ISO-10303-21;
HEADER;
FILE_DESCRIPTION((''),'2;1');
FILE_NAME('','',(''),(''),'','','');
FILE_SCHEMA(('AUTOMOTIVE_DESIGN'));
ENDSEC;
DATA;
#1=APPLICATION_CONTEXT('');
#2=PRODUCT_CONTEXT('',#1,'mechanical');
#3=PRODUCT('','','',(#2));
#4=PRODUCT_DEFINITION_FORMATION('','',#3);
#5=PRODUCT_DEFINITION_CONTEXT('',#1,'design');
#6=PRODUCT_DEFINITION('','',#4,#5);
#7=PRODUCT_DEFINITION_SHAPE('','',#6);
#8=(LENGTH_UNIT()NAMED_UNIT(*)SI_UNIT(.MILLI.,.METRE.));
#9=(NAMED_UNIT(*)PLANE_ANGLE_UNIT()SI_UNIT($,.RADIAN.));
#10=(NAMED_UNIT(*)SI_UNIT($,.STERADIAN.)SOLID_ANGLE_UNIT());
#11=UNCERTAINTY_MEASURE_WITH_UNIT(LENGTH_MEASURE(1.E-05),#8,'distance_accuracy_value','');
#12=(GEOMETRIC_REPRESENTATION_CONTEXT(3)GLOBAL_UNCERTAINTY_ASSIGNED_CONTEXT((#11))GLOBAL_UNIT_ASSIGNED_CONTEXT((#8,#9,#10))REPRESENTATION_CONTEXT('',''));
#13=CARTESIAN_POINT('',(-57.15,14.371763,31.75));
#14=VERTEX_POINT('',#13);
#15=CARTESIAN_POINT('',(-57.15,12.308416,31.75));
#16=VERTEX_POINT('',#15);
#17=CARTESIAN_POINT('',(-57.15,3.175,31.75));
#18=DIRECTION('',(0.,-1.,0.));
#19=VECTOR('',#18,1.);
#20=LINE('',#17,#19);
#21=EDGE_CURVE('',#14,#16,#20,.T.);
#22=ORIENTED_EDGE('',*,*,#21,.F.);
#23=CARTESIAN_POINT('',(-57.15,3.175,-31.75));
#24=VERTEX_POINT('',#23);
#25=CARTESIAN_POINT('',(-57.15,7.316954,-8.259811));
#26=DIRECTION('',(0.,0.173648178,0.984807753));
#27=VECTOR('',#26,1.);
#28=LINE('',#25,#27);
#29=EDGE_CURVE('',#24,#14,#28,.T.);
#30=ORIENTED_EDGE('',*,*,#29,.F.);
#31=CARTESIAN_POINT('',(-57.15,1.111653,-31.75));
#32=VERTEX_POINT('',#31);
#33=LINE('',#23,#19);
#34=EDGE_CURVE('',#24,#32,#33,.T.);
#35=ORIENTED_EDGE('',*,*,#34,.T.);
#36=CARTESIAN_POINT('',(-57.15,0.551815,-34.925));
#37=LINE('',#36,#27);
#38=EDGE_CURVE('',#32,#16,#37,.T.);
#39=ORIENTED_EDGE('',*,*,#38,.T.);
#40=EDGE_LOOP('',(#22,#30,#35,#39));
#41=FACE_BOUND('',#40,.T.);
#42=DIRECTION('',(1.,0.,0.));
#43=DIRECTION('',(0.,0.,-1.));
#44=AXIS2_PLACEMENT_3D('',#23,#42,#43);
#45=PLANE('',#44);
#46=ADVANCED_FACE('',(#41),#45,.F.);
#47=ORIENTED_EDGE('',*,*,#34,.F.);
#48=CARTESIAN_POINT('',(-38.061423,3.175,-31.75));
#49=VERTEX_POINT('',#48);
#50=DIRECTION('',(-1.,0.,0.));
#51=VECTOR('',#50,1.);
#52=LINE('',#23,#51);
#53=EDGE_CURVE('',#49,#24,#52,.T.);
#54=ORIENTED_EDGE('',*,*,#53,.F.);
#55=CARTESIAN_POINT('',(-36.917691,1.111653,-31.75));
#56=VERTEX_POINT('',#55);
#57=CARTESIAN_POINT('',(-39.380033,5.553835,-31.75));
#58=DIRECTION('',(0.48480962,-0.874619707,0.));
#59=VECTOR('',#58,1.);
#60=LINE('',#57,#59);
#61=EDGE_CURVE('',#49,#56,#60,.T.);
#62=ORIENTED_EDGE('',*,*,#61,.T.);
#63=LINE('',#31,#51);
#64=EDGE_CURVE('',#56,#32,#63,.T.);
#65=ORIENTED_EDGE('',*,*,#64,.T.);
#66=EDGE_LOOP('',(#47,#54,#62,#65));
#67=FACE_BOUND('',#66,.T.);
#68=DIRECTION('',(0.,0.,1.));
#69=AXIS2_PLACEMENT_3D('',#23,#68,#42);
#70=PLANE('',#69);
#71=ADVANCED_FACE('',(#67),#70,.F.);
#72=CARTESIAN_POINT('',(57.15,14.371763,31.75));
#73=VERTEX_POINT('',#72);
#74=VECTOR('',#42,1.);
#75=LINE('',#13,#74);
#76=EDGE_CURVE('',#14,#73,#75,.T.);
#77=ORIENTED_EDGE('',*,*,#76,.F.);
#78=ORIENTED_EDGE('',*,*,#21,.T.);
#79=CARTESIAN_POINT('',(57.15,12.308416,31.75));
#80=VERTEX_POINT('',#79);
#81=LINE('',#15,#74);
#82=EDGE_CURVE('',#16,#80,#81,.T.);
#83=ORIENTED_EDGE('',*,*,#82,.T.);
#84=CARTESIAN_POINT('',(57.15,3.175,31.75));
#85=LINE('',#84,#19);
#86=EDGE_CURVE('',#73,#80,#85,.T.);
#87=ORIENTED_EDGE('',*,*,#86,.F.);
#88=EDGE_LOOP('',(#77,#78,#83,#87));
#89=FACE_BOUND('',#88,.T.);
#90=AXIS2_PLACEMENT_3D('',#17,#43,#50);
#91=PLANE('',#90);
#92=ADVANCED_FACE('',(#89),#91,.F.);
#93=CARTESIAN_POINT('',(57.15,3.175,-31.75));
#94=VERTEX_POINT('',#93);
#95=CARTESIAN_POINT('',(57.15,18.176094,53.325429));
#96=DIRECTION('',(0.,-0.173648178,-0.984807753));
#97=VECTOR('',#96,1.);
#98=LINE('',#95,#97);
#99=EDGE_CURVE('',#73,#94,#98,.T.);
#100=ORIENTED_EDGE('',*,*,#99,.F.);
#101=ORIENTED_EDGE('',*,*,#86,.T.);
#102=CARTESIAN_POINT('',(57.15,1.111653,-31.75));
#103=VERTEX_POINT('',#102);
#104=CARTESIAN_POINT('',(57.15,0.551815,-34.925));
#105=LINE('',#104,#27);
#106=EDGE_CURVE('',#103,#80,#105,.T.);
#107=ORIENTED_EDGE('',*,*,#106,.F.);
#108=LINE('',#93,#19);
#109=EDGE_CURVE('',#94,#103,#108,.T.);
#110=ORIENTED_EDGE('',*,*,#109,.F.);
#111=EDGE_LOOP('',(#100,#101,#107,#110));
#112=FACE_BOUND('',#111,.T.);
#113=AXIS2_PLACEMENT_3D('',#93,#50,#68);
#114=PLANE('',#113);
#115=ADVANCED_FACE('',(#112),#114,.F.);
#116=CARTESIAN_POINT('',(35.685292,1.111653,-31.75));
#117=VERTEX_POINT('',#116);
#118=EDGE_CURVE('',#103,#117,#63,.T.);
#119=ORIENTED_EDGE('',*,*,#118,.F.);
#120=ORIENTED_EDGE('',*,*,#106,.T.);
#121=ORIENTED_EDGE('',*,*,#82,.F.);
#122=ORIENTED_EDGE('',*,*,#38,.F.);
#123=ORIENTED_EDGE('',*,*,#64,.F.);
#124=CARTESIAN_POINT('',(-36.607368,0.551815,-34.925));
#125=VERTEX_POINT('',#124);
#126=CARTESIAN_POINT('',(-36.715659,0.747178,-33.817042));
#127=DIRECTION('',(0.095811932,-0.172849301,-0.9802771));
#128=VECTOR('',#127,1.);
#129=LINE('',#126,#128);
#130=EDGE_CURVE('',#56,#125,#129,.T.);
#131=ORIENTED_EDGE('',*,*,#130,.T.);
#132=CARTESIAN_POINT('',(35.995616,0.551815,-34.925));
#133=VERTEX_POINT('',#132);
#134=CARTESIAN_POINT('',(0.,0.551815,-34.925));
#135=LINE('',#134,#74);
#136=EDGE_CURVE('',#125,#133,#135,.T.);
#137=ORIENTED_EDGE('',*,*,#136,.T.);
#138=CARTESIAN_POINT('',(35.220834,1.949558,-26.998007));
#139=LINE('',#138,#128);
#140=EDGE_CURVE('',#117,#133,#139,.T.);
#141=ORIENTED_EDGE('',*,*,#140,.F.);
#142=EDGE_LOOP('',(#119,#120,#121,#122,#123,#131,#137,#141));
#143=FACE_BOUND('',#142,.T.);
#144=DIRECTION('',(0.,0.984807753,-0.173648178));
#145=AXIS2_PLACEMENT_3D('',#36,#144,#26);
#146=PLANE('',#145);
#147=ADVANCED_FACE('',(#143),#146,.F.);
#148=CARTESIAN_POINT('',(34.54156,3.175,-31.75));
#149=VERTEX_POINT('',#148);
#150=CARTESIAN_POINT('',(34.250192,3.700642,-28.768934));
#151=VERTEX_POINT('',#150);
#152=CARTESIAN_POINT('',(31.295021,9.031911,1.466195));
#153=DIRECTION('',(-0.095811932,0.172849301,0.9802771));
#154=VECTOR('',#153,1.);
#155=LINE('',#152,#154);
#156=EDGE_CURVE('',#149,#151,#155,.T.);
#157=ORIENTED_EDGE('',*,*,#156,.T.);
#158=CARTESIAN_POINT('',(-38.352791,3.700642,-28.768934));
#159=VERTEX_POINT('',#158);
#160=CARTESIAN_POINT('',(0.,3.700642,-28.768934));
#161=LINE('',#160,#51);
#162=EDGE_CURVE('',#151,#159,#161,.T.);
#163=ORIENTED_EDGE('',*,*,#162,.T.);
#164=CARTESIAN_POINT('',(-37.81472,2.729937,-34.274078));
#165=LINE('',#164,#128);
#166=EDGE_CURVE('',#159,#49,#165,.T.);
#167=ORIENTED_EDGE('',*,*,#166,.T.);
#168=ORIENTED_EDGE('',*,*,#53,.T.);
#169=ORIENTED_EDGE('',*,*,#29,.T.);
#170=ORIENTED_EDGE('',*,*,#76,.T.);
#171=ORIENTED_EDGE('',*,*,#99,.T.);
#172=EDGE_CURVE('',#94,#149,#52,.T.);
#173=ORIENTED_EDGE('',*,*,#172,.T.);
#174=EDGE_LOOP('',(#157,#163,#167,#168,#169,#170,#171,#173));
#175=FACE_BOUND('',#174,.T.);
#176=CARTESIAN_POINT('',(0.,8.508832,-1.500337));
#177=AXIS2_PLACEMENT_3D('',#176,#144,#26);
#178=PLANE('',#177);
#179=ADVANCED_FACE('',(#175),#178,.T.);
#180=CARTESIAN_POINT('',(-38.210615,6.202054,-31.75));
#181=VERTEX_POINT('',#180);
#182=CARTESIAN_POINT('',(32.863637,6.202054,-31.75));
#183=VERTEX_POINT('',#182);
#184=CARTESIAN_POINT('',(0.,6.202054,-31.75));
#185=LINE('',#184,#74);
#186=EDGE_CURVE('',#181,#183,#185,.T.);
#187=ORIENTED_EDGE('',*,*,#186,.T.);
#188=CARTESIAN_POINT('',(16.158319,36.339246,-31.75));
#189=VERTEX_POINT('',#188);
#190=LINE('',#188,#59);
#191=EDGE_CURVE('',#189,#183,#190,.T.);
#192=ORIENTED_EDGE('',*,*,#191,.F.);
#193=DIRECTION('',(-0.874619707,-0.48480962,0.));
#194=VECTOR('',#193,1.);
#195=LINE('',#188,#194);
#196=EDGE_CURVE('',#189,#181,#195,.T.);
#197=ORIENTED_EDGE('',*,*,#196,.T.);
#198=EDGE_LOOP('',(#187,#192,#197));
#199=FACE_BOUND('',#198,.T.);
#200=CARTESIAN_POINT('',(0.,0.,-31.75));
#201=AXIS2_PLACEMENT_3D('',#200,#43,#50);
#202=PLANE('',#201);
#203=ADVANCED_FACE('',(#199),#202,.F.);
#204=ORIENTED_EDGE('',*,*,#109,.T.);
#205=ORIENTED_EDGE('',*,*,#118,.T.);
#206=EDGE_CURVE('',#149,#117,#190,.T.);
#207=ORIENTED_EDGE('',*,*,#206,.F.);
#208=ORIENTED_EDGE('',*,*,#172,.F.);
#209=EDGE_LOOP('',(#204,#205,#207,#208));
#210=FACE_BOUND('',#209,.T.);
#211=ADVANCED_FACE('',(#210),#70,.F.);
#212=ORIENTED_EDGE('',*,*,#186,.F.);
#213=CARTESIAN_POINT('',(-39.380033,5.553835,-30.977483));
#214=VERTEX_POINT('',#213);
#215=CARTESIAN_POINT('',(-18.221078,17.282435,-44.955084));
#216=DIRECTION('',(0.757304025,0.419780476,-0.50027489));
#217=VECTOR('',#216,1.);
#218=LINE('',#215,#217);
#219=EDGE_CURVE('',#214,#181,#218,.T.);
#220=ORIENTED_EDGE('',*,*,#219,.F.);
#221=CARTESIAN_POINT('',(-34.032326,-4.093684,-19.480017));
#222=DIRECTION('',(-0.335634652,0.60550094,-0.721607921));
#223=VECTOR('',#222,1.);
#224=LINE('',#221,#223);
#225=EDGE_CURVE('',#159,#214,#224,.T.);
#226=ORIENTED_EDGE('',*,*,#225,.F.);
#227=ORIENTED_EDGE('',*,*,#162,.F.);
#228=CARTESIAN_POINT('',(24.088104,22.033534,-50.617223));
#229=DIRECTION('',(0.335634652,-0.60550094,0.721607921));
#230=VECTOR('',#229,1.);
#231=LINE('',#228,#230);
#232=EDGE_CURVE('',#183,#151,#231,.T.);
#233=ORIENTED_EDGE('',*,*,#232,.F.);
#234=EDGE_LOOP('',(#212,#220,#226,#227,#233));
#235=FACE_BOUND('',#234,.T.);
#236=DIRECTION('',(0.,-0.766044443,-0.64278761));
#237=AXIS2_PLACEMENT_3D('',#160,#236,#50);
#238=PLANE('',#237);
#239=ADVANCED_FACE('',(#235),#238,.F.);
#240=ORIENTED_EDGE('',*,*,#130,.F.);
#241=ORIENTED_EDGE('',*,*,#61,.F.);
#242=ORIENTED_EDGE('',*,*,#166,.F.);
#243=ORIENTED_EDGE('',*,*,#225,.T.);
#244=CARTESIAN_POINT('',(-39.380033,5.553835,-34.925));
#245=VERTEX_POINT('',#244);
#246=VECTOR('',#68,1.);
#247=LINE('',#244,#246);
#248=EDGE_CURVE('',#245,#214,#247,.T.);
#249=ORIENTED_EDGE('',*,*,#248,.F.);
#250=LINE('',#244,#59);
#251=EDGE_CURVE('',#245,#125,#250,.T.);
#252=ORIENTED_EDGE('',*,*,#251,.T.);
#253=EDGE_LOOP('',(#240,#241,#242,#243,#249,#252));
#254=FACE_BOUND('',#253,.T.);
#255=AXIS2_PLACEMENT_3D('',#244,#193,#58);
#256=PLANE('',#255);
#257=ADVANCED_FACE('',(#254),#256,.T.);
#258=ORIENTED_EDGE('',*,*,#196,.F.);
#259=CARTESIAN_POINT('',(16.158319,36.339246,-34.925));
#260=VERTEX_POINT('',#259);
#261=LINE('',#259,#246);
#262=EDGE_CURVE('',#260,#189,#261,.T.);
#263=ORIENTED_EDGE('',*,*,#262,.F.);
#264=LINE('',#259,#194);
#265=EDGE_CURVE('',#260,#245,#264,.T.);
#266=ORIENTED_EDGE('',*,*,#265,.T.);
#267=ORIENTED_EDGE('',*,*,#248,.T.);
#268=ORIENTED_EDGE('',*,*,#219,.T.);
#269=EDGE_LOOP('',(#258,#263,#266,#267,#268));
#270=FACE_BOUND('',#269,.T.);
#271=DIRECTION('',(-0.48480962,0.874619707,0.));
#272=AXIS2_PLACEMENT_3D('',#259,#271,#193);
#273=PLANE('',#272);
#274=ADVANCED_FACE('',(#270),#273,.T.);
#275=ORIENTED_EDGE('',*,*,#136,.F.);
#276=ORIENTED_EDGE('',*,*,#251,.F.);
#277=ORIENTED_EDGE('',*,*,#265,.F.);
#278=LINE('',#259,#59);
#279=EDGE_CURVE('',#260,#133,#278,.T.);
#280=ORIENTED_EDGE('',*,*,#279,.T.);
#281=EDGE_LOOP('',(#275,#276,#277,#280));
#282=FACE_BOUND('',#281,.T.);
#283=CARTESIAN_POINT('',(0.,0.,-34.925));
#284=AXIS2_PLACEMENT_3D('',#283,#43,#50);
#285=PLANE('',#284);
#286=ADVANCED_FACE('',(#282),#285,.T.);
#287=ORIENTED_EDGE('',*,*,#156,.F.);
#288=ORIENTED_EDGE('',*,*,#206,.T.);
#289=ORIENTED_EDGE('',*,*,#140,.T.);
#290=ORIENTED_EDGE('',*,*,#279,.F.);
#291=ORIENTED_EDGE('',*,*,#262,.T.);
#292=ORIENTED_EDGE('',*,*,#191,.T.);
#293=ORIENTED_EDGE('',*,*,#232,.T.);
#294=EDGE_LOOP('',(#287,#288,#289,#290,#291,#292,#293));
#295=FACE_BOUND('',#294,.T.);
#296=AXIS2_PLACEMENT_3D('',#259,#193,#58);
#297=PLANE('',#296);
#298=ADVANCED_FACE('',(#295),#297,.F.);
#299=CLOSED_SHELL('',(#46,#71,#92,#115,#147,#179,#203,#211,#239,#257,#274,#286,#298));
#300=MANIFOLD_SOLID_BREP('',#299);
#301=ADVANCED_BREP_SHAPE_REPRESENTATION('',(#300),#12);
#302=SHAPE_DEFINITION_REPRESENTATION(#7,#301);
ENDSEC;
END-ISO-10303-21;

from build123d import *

# Parameters (mm, degrees)
SKETCH1_W           = 114.3
SKETCH1_H           = 63.5
BOSS_EXTRUDE1_DEPTH = 3.175
BOSS_EXTRUDE2_DEPTH = 3.175
BOSS_EXTRUDE3_START = -57.15
BOSS_EXTRUDE3_DEPTH = 114.3
CUT_EXTRUDE1_DEPTH  = 125.91911954
CHAMFER1_SIZE       = 2.54


# Read off the part's stored shape, not the designer's step: Boss-Extrude3
with BuildPart() as part:
    # Sketch1 → Boss-Extrude1 (new body)
    with BuildSketch(Plane(origin=(0, 0, 0), x_dir=(1, 0, 0), z_dir=(0, 1, 0))):
        Rectangle(SKETCH1_W, SKETCH1_H)
    extrude(amount=BOSS_EXTRUDE1_DEPTH)

    # Sketch2 → Boss-Extrude2 (add)
    with BuildSketch(Plane(origin=(0, 0, -31.75), x_dir=(-1, 0, 0), z_dir=(0, 0, -1))):
        Polygon((-16.15831866, 36.339246026), (39.380032744, 5.55383514), (36.301491655, 0), (-36.301491655, 0), align=None)
    extrude(amount=BOSS_EXTRUDE2_DEPTH)

    # Boss-Extrude3 outline → Boss-Extrude3 (add)
    with BuildSketch(Plane.YZ.offset(BOSS_EXTRUDE3_START)):
        Polygon((14.371763275, 31.75), (3.175, 31.75), (3.175, -31.75), align=None)
    extrude(amount=BOSS_EXTRUDE3_DEPTH)

    # Sketch4 → Cut-Extrude1 (cut, through all)
    with BuildSketch(Plane(origin=(57.15, 0, 0), x_dir=(0, 0, -1), z_dir=(1, 0, 0))):
        Polygon((-31.75, 12.3084164), (-31.75, 0), (34.925, 0), (34.925, 0.551814961), align=None)
    extrude(amount=-CUT_EXTRUDE1_DEPTH, mode=Mode.SUBTRACT)

    # Chamfer1
    # the kernel refuses this chamfer: 2.54 mm, written as the material it adds along each edge
    with BuildSketch(Plane(origin=(-45.794774456, 3.175, -31.75), x_dir=(0, 0.14881491150796153, 0.988865067697751), z_dir=(1, 0, 0))) as chamfer1_piece_1_section:
        Polygon((CHAMFER1_SIZE * 1.19137631147, -CHAMFER1_SIZE * 0.0299851619673), (CHAMFER1_SIZE * 0.177350705421, -CHAMFER1_SIZE * 1.17848349702), (0, 0), align=None)
    chamfer1_piece_1 = extrude(amount=88.069686436, mode=Mode.PRIVATE)
    chamfer1_piece_1 = split(chamfer1_piece_1, bisect_by=Plane(origin=(-30.181920022, -11.039999469, -30.75599928), z_dir=(0.8746197071393951, 0.48480962024633845, 0)), keep=Keep.TOP, mode=Mode.PRIVATE)
    chamfer1_piece_1 = split(chamfer1_piece_1, bisect_by=Plane(origin=(25.356431382, 19.745411417, -30.75599928), z_dir=(-0.8746197071393954, -0.4848096202463377, 0)), keep=Keep.TOP, mode=Mode.PRIVATE)
    chamfer1_piece_1 = split(chamfer1_piece_1, bisect_by=Plane(origin=(-11.60015099, 20.952475045, -30.75599928), z_dir=(0.4848096202463377, -0.8746197071393954, 0)), keep=Keep.TOP, mode=Mode.PRIVATE)
    add(chamfer1_piece_1)


solid = part.part
